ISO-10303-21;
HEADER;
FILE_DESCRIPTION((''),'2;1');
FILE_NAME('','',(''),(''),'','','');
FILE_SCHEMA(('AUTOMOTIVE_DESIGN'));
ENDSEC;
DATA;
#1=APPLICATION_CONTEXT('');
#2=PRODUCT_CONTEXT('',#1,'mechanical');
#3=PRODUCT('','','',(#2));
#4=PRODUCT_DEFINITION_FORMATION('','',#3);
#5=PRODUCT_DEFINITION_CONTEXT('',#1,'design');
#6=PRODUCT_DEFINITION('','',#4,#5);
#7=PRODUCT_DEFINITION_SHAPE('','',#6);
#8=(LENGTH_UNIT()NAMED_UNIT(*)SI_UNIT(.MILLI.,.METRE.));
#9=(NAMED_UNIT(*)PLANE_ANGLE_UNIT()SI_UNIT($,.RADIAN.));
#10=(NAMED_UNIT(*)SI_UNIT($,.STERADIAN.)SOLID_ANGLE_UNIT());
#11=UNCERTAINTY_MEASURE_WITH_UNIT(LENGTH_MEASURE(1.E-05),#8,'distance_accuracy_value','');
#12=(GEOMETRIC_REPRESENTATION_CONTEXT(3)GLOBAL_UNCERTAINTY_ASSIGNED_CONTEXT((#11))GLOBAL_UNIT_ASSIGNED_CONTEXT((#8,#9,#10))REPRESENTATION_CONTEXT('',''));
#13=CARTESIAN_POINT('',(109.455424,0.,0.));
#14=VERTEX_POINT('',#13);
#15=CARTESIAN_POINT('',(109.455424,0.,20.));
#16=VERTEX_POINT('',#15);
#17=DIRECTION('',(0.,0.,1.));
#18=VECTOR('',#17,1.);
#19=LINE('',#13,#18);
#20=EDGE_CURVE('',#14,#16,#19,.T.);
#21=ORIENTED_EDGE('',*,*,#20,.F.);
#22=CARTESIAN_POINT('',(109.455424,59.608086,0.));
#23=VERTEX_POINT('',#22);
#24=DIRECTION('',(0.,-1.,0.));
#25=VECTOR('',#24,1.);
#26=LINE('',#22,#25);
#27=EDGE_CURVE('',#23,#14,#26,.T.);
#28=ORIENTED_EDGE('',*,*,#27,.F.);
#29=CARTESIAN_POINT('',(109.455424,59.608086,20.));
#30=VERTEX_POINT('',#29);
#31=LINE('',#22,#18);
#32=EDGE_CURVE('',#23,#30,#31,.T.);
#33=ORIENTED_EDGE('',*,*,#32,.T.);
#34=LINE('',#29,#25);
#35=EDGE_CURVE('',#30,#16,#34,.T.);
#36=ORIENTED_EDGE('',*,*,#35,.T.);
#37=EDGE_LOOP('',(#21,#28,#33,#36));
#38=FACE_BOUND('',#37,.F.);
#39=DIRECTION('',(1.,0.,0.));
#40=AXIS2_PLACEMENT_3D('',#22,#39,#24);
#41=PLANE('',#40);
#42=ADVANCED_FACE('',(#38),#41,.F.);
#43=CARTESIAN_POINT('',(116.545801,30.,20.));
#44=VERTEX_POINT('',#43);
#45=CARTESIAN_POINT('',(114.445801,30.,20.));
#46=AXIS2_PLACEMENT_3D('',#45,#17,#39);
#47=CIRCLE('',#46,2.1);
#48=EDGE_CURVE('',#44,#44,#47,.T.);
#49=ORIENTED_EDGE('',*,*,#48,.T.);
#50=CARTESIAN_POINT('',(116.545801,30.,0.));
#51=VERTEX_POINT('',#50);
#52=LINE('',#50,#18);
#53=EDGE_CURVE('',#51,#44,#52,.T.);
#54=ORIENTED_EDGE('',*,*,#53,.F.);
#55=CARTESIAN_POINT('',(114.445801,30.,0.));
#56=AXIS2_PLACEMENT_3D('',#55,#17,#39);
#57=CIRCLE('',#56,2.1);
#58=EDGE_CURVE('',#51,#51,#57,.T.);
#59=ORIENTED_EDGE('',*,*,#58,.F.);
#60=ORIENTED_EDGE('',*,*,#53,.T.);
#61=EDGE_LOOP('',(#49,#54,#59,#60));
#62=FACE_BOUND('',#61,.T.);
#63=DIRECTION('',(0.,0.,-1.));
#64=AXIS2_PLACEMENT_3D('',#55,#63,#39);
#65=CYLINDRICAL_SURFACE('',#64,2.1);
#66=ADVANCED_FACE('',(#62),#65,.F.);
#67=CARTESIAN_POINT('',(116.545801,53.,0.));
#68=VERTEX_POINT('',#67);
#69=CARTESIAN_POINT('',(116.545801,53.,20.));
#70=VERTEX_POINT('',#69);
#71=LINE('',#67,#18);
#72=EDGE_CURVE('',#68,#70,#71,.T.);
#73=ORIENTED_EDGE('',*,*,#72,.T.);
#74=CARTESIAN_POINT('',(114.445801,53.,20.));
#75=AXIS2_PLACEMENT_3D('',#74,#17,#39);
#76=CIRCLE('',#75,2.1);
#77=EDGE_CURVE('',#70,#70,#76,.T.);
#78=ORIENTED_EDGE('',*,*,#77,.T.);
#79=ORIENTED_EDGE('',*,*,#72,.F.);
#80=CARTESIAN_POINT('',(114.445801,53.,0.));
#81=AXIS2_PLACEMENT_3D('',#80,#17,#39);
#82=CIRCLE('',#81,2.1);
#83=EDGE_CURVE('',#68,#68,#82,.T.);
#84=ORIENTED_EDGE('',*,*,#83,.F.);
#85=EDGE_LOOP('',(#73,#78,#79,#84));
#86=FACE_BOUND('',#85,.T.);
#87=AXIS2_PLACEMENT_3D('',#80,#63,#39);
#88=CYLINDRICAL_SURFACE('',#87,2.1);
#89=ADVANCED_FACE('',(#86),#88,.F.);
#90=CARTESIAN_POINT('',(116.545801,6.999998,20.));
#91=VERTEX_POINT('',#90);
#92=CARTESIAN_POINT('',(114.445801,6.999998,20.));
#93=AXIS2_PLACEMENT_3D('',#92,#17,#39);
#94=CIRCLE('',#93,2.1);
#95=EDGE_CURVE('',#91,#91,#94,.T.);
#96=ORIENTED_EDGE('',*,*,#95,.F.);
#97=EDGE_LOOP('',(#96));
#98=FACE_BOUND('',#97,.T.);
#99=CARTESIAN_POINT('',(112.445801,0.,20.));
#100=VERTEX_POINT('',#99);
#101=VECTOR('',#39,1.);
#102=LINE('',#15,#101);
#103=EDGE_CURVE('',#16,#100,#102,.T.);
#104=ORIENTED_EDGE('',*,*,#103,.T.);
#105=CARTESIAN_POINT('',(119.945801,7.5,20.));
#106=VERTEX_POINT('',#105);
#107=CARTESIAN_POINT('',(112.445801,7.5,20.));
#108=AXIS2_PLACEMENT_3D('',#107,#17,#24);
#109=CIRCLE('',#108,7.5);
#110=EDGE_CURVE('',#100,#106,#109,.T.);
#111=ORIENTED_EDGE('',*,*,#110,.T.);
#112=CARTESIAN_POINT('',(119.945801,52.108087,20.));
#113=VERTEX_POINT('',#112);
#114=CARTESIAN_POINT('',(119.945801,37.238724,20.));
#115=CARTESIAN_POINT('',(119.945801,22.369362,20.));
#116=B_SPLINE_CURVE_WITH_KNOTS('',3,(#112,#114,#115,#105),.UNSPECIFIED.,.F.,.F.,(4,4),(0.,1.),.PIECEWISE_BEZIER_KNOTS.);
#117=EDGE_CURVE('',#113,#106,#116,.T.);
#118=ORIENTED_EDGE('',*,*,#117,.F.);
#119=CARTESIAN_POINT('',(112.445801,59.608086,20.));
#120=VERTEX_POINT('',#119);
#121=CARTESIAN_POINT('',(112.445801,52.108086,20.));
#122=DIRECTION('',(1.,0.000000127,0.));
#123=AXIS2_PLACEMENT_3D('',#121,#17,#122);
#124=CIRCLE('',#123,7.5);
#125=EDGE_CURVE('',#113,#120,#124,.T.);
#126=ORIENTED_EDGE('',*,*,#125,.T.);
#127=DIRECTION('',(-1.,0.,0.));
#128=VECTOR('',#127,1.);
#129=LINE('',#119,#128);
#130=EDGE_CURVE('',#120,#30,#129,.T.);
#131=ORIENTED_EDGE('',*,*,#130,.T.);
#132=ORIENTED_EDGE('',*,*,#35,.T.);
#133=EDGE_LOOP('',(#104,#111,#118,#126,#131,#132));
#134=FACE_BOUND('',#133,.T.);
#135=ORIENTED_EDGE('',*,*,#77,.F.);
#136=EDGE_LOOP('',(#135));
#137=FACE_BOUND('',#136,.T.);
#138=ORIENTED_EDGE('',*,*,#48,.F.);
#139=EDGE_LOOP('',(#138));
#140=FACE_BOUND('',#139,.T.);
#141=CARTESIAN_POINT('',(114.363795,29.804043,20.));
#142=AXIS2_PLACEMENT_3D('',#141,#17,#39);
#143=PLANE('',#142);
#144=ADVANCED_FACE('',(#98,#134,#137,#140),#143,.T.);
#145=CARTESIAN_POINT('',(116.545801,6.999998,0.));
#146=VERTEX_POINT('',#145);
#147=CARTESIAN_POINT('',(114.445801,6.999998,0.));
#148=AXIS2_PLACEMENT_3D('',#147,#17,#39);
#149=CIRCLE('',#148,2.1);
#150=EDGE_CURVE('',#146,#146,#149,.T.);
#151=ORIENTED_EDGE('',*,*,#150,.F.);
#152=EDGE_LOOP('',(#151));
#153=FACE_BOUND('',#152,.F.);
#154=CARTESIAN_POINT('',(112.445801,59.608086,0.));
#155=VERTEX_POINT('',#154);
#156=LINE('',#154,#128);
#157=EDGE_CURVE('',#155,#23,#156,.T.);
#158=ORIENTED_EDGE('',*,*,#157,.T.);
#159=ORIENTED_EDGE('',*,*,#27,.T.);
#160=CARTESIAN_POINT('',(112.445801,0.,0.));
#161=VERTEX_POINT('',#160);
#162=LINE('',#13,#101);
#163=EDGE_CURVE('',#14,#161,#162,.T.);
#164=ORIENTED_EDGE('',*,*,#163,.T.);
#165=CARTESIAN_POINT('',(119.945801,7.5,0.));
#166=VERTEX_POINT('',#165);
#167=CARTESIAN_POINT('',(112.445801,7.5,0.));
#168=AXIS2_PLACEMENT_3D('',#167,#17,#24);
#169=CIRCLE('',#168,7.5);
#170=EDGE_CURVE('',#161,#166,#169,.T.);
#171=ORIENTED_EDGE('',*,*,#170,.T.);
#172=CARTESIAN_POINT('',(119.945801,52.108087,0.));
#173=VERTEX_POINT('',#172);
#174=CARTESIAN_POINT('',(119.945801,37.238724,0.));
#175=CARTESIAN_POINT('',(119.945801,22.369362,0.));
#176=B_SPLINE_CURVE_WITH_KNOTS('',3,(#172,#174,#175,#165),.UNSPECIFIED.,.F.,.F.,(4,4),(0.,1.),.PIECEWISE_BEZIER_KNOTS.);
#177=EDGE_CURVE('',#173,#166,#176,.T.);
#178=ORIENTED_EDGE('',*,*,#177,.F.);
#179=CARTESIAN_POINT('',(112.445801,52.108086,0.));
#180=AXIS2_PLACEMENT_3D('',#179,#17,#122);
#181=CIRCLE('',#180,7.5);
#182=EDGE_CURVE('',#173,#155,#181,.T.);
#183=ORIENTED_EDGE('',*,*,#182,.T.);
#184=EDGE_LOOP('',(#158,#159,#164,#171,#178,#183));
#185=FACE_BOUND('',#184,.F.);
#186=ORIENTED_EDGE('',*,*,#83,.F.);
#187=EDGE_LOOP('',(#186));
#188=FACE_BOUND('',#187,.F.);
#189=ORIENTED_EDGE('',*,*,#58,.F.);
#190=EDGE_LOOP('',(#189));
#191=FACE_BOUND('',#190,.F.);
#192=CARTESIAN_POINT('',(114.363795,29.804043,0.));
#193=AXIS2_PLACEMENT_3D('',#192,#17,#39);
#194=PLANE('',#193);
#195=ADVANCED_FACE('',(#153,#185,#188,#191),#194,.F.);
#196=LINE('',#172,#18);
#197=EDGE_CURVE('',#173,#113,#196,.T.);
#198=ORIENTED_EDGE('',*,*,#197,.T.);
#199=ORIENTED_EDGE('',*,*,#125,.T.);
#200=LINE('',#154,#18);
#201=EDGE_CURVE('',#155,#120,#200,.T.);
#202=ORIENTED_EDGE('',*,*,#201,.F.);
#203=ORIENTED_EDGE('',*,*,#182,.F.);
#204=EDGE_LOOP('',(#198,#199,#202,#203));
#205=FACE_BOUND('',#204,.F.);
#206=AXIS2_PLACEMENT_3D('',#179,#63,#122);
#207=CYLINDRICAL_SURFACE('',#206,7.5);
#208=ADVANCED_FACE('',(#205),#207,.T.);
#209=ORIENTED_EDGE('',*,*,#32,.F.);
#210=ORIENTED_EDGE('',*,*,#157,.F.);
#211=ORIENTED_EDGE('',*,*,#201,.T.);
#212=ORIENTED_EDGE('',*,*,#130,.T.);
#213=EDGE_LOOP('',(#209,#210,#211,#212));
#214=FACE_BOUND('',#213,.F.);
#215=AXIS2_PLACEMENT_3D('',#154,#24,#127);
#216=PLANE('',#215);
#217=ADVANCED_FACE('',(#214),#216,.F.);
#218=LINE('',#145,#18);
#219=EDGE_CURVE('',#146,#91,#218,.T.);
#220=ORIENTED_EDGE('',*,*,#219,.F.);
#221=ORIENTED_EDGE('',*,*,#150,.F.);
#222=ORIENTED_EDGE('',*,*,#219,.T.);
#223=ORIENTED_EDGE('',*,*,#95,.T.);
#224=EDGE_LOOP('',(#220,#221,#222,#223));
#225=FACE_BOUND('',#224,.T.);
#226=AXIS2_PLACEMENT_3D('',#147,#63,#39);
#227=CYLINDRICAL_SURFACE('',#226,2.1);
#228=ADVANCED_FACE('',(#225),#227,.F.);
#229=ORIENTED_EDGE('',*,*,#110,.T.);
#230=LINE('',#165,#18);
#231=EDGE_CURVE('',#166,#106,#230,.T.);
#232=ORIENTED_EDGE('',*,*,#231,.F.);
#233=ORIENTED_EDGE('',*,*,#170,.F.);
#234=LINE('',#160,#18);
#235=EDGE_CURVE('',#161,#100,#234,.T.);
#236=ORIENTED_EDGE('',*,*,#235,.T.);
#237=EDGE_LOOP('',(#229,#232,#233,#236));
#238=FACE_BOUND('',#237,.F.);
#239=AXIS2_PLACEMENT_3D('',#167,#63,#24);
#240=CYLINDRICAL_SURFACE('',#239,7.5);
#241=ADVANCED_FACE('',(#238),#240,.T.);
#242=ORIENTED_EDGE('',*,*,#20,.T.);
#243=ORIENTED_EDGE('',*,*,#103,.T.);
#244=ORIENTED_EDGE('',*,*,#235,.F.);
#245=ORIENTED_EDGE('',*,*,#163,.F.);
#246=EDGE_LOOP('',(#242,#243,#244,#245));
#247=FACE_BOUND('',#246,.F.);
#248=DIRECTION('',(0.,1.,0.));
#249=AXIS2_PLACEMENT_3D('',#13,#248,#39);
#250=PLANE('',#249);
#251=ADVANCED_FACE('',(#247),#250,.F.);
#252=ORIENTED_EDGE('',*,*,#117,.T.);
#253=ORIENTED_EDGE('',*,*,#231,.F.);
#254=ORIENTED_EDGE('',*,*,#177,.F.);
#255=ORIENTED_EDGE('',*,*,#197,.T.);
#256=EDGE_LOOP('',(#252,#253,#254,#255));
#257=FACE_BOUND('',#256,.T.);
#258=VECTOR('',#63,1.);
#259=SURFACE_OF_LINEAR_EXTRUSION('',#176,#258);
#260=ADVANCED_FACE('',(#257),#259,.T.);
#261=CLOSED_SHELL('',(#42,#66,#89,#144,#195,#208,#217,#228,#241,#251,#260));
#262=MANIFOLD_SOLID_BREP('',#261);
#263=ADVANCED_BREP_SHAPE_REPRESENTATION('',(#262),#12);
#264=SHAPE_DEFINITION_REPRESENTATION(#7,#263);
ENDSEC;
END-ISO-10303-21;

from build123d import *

# Parameters (mm, degrees)
F1_R     = 2.1
F2_DEPTH = 20


# Not quite as in the source:
# - ends of sketch curves that miss each other by under 0.0002 mm in the source are joined


with BuildPart() as f2:
    # F1 (on Top) → F2 (new body)
    with BuildSketch(Plane.XY):
        with BuildLine():
            Line((112.4458007812, 59.6080856323), (109.4554236891, 59.6080856323))
            Line((109.4554236891, 59.6080856323), (109.4554236891, 0))
            Line((109.4554236891, 0), (112.4458007812, 0))
            ThreePointArc((112.4458007812, 0), (117.7491016401, 2.1966991411), (119.9458007812, 7.5))
            add(Edge.make_bspline(
                [(119.9458007812, 52.1080865864), (119.9458007812, 37.238724391), (119.9458007812, 22.3693621955), (119.9458007812, 7.5)],
                knots=[0, 0, 0, 0, 1, 1, 1, 1], degree=3))
            ThreePointArc((119.9458007812, 52.1080865864), (117.7491016401, 57.4113864912), (112.4458007812, 59.6080856323))
        make_face()
        with Locations((114.4458007813, 6.9999980927)):
            Circle(F1_R, mode=Mode.SUBTRACT)
        with Locations((114.4458007813, 29.9999995232)):
            Circle(F1_R, mode=Mode.SUBTRACT)
        with Locations((114.4458007813, 52.9999995232)):
            Circle(F1_R, mode=Mode.SUBTRACT)
    extrude(amount=F2_DEPTH)


solid = f2.part
